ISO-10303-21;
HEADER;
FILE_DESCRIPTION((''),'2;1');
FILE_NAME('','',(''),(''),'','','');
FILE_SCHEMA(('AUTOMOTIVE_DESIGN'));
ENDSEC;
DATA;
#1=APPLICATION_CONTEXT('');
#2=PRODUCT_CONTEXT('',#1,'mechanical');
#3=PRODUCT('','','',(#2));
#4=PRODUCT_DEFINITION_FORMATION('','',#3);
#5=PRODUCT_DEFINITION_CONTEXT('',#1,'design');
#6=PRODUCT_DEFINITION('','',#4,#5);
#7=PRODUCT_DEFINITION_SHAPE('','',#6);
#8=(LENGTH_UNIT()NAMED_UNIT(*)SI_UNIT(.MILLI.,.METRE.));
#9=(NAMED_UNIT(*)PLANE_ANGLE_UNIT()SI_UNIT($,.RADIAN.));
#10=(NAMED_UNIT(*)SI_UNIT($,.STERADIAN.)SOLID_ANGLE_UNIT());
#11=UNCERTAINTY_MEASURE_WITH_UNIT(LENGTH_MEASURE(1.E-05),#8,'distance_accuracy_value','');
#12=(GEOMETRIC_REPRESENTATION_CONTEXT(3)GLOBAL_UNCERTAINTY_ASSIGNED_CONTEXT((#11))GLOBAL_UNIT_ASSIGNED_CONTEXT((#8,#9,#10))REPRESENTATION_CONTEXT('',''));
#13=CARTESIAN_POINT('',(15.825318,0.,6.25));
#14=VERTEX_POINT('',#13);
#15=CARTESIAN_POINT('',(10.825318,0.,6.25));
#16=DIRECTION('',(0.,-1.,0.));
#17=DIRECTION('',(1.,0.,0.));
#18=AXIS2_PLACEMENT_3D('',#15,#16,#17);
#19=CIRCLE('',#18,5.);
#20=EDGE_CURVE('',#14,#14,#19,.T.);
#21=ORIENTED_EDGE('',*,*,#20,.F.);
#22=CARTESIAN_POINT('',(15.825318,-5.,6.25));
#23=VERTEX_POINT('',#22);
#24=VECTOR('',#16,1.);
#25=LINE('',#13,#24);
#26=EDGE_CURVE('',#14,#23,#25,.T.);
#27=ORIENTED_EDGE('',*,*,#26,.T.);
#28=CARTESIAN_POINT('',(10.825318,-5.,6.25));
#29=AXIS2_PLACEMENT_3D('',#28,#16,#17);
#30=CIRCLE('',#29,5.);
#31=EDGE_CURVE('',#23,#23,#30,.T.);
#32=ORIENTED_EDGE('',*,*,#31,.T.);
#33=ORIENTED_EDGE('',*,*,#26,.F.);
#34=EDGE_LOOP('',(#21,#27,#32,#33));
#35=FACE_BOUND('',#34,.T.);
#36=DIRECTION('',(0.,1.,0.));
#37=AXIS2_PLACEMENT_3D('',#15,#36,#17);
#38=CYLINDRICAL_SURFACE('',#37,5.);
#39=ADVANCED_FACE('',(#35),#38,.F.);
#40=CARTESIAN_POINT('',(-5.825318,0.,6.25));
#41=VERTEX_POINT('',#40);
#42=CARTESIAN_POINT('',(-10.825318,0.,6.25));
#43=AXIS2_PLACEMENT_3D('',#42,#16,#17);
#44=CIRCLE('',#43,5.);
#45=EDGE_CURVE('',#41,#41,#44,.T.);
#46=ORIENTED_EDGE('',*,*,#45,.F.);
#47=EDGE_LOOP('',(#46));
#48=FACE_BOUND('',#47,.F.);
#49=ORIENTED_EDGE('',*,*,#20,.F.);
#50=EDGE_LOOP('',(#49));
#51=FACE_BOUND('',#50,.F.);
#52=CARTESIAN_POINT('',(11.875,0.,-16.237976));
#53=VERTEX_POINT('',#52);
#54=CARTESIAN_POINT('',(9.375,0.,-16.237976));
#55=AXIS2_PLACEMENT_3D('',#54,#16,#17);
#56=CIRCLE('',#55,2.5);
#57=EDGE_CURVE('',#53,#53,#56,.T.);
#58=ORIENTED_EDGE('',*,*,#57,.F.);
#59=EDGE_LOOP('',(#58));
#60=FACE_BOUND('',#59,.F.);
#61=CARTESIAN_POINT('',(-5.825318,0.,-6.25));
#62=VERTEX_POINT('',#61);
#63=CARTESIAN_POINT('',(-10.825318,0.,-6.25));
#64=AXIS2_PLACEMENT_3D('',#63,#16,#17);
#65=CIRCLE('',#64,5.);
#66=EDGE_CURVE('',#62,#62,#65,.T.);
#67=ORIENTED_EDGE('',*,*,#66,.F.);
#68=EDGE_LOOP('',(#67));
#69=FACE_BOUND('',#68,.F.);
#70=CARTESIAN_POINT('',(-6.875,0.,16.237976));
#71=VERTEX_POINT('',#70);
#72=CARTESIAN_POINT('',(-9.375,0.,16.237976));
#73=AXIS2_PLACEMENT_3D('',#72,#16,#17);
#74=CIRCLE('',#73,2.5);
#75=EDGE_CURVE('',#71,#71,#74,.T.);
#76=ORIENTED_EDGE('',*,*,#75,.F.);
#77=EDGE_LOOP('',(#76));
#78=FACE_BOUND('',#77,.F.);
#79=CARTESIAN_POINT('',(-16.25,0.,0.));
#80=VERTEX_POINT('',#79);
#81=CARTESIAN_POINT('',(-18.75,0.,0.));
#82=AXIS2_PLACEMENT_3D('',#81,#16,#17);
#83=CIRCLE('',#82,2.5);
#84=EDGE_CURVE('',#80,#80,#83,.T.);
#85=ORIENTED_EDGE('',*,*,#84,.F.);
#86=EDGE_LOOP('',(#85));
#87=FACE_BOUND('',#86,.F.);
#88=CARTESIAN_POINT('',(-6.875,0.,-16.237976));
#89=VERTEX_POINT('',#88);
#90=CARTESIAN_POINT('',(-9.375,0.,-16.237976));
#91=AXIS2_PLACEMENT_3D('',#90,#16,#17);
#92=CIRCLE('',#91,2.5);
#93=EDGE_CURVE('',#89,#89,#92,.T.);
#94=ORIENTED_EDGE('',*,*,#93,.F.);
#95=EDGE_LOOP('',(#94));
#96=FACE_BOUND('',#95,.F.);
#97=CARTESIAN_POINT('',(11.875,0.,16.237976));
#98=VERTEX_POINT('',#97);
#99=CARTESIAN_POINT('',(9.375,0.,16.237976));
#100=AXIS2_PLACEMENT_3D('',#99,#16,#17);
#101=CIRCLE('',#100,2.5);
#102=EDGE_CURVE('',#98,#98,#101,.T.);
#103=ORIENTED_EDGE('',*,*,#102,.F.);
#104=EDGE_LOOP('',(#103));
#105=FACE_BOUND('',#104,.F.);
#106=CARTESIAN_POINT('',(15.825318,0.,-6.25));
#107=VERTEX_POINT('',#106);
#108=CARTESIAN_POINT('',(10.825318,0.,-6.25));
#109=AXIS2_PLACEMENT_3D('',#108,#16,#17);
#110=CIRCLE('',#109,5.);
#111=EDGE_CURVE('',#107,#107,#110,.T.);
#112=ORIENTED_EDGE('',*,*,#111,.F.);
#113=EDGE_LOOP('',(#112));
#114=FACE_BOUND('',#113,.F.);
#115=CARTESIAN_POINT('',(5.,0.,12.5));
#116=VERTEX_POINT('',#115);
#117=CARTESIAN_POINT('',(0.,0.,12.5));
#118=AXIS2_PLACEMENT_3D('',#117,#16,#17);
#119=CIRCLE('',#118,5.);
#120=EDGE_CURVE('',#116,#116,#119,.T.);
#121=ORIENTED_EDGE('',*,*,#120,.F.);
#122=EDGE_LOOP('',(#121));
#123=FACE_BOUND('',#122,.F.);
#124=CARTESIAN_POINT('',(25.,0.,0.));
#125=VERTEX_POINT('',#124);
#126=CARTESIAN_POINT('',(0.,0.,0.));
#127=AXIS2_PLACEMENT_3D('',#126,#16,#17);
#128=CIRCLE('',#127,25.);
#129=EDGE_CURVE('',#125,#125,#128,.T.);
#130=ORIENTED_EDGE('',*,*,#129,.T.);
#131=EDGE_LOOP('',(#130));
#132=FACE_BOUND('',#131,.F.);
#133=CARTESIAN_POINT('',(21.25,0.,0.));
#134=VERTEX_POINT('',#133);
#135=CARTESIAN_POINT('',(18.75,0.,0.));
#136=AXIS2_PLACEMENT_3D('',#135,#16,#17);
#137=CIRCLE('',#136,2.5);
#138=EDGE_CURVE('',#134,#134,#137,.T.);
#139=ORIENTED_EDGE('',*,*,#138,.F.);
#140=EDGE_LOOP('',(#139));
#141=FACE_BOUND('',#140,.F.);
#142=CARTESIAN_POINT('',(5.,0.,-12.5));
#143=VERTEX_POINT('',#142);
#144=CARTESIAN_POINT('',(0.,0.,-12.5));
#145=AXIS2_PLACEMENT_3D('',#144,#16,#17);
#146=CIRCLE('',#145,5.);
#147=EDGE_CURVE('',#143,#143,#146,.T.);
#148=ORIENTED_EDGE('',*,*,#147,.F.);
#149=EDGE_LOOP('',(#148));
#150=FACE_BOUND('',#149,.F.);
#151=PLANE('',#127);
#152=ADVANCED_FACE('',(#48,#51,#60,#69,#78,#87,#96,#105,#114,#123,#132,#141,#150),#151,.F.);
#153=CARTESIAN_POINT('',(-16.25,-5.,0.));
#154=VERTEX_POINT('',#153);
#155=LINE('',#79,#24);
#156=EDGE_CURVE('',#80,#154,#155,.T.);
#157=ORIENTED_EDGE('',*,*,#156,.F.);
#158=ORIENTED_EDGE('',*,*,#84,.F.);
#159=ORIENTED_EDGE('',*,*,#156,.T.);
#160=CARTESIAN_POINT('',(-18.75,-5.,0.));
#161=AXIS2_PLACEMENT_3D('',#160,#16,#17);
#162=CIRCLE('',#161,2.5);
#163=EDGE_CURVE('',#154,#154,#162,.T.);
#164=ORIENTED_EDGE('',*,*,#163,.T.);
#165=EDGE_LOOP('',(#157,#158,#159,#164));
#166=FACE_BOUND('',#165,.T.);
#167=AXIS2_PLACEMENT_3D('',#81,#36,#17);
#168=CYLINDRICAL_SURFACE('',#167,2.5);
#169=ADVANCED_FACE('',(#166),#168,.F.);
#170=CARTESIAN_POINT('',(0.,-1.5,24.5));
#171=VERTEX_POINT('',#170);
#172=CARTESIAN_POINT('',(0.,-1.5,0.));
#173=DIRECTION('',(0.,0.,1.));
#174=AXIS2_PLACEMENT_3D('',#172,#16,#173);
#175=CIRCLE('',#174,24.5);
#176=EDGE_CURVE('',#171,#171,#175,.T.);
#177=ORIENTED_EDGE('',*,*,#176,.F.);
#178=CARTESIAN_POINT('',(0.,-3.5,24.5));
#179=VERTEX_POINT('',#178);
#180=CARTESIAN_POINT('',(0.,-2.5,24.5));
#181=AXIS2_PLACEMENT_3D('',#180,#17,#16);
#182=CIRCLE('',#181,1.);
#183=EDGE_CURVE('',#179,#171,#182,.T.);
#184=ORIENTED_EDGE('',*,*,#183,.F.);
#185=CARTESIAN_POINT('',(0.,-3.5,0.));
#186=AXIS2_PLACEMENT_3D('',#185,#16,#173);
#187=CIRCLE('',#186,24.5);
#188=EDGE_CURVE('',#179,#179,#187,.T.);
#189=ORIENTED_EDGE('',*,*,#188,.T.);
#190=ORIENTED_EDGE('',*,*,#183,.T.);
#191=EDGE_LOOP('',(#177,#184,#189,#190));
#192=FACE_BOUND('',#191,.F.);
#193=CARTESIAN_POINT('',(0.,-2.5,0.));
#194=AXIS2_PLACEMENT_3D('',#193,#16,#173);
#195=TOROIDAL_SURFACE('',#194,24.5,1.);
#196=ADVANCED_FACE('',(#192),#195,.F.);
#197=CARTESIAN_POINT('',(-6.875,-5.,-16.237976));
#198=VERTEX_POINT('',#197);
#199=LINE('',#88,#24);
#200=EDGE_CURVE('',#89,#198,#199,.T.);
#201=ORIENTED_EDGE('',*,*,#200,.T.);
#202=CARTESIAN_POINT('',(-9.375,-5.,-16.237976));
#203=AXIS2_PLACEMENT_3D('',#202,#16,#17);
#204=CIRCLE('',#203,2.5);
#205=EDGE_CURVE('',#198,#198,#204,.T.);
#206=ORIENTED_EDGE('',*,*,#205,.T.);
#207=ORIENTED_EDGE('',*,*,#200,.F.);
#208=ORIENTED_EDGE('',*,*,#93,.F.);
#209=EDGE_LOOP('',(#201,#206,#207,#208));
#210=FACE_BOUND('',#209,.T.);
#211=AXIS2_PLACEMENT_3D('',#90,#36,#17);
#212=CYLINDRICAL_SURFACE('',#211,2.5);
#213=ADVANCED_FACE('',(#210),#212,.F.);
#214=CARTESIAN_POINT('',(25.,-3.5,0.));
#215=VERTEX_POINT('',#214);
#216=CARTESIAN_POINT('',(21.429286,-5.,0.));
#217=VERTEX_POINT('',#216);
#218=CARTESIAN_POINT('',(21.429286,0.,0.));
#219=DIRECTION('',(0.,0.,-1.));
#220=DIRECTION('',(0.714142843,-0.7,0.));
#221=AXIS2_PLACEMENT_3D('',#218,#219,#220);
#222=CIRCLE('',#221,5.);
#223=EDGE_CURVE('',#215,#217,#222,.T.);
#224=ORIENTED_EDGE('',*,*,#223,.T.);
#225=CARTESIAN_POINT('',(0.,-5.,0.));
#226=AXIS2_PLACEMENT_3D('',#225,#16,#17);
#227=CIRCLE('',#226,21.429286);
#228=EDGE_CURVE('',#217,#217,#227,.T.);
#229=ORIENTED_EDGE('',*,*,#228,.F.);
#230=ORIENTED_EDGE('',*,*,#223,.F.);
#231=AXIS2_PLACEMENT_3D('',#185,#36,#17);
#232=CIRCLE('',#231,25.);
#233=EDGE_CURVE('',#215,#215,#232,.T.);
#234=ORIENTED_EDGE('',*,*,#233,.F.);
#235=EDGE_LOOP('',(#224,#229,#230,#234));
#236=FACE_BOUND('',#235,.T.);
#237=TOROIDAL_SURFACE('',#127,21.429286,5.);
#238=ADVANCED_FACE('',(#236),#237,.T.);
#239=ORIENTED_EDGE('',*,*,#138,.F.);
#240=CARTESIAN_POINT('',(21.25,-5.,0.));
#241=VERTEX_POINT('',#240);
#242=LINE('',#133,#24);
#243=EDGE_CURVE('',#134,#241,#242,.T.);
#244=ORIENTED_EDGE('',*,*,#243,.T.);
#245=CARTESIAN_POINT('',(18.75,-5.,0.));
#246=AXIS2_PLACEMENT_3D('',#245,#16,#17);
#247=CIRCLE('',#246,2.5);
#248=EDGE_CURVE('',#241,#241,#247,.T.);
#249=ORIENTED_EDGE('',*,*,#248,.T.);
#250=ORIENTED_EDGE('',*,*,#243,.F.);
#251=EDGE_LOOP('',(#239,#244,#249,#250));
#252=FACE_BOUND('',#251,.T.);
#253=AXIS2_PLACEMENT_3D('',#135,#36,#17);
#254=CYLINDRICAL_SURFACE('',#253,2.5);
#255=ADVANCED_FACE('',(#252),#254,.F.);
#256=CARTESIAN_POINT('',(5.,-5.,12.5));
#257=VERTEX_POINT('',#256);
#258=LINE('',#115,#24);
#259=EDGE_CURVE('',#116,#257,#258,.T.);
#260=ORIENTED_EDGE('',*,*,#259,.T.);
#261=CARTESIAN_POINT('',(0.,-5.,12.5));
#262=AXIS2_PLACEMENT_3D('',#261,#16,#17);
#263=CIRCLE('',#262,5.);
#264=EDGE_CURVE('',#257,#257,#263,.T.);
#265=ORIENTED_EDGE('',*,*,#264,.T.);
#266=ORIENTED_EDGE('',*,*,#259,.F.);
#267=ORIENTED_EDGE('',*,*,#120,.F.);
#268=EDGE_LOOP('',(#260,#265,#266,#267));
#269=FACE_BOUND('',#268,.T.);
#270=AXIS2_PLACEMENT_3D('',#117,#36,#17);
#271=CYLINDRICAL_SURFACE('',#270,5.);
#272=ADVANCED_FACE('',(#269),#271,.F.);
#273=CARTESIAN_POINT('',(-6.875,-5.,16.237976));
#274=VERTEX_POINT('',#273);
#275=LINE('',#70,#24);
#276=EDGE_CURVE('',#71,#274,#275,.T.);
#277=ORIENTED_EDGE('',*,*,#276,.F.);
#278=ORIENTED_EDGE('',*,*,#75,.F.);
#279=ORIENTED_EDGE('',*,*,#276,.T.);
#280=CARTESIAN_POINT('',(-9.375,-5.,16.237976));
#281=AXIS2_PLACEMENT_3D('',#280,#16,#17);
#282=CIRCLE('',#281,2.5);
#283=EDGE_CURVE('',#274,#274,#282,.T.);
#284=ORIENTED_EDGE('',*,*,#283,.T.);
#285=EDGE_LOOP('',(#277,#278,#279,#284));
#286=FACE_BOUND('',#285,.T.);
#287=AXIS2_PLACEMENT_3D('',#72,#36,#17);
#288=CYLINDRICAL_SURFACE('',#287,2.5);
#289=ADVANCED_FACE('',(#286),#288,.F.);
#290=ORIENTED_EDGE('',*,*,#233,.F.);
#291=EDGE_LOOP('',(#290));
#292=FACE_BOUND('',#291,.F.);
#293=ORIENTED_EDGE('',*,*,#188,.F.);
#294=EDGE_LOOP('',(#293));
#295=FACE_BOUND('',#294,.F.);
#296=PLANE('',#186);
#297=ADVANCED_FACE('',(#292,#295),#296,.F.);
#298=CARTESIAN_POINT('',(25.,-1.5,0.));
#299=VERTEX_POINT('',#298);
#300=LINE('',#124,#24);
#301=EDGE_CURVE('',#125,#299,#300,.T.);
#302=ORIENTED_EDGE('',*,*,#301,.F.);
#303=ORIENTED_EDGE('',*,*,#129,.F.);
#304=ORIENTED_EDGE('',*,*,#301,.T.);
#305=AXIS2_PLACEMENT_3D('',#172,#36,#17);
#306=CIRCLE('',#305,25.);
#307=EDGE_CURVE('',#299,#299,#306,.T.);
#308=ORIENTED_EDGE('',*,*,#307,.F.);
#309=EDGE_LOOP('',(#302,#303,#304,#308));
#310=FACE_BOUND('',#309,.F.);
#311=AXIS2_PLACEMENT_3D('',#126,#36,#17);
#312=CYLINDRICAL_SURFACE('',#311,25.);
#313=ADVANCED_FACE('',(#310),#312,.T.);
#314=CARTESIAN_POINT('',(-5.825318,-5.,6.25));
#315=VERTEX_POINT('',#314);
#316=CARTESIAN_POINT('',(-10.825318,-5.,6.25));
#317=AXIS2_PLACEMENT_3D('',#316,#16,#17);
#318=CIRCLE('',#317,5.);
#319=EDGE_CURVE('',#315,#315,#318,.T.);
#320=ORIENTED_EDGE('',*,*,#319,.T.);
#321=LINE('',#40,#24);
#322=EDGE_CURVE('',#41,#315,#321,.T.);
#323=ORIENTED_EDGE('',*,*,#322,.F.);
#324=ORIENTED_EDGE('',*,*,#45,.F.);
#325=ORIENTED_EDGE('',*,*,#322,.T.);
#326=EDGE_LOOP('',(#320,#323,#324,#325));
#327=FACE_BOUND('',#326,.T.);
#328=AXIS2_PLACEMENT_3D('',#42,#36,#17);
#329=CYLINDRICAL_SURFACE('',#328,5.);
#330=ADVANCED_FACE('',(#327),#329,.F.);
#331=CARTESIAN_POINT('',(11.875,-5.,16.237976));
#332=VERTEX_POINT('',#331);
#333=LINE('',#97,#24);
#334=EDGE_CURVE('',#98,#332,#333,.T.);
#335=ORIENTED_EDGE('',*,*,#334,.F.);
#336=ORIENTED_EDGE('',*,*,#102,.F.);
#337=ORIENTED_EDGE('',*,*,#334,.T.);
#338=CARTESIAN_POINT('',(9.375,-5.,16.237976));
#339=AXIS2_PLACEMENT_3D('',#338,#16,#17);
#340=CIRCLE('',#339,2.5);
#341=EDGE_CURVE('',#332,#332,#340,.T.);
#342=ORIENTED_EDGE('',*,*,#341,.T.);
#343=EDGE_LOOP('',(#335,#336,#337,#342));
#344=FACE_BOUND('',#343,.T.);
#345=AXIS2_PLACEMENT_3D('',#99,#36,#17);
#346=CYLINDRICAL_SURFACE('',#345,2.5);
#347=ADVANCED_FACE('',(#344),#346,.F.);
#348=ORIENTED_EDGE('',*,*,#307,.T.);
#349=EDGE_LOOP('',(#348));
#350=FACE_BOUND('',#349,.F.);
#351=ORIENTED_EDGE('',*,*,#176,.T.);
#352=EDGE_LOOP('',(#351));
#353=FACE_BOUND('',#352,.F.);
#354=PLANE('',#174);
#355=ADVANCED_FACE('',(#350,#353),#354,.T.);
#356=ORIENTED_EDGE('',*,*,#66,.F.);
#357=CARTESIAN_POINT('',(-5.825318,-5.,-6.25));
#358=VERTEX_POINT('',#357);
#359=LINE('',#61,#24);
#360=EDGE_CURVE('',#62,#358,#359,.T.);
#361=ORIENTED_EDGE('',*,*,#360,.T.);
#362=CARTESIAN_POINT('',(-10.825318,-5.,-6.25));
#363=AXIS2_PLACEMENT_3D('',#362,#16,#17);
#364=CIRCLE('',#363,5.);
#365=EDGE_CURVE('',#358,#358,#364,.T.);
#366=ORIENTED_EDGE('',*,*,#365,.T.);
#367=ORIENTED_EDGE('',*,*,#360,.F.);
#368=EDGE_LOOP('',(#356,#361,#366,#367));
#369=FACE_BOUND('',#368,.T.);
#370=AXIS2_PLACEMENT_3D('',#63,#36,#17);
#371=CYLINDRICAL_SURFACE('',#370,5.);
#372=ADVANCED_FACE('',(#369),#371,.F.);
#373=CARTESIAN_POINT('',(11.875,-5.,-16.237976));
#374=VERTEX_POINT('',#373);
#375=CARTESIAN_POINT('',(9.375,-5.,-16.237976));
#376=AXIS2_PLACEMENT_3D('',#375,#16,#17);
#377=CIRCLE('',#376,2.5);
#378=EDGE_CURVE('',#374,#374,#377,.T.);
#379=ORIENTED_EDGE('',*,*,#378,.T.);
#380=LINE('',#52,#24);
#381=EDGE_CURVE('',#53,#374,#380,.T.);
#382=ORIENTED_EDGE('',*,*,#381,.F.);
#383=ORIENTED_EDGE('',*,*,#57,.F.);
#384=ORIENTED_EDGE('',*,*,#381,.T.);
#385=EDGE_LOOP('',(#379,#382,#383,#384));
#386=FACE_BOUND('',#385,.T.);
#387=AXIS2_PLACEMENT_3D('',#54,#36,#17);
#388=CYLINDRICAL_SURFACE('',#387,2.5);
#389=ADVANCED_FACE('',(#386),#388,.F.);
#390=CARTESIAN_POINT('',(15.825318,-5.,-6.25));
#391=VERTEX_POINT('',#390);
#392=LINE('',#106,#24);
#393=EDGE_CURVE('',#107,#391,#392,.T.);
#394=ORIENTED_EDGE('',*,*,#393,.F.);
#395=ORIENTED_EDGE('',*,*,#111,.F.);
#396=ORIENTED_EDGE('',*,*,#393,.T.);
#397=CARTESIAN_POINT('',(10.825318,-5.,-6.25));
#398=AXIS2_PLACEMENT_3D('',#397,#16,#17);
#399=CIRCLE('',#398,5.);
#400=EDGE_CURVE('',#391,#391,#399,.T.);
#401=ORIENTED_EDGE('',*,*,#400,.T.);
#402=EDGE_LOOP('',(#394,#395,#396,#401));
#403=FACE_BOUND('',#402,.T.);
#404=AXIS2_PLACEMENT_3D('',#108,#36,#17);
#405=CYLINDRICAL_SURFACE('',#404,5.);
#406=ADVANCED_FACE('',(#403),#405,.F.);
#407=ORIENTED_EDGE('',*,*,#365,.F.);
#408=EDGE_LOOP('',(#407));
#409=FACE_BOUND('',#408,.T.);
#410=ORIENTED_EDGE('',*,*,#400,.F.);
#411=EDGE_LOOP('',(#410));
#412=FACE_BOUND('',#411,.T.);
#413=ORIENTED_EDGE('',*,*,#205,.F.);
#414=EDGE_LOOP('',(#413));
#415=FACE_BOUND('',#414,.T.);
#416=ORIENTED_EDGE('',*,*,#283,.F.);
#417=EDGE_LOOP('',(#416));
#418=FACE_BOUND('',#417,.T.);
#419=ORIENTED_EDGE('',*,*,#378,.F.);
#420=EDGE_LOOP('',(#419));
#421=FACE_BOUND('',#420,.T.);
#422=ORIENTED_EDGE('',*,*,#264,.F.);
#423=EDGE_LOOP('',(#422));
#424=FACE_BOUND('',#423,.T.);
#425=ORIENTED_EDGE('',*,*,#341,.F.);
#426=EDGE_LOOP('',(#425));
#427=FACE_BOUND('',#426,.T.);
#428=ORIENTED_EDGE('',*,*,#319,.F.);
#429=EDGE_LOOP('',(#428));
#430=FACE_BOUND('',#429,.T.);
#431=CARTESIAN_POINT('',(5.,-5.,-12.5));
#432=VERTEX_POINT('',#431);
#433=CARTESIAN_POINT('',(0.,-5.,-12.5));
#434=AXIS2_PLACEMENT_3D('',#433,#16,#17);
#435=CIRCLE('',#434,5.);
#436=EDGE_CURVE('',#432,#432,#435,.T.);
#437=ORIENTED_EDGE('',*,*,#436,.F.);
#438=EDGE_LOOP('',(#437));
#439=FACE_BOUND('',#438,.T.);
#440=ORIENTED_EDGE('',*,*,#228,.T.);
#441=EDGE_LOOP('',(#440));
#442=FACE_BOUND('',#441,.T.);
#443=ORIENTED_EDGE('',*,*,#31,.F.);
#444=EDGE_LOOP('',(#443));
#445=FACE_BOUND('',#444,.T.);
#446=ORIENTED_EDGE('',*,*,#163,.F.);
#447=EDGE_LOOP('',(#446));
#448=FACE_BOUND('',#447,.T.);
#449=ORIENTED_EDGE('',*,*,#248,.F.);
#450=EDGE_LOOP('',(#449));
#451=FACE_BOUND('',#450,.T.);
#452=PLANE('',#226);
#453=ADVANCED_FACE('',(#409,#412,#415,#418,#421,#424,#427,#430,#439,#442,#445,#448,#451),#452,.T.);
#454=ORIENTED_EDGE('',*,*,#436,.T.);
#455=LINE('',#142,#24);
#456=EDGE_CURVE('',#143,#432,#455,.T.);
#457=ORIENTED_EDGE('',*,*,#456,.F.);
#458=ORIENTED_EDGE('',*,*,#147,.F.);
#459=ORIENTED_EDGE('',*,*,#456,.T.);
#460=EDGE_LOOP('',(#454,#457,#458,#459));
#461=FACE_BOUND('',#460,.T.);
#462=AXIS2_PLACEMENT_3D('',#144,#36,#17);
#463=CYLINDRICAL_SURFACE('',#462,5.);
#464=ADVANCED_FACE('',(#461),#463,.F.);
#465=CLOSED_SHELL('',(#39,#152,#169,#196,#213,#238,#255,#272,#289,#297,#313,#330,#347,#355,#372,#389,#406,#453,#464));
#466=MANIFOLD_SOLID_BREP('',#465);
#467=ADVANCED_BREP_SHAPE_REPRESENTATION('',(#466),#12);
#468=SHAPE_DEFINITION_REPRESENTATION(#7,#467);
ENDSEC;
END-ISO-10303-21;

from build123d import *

# Parameters (mm, degrees)
F0_R     = 25
F0_R_2   = 2.5
F0_R_3   = 5
F1_DEPTH = 5


# Not quite as in the source:
# - a fillet or chamfer that OpenCascade refuses, or shapes differently, is made with other operations: its cross-section is extruded or revolved along the edge and cut away or added


with BuildPart() as f1:
    # F0 (on Front) → F1 (new body)
    with BuildSketch(Plane.XZ):
        Circle(F0_R)
        with Locations((-9.375, -16.237976321)):
            Circle(F0_R_2, mode=Mode.SUBTRACT)
        with Locations((-10.8253175473, -6.25)):
            Circle(F0_R_3, mode=Mode.SUBTRACT)
        with Locations((9.375, -16.237976321)):
            Circle(F0_R_2, mode=Mode.SUBTRACT)
        with Locations((0, -12.5)):
            Circle(F0_R_3, mode=Mode.SUBTRACT)
        with Locations((10.8253175473, -6.25)):
            Circle(F0_R_3, mode=Mode.SUBTRACT)
        with Locations((-18.75, 0)):
            Circle(F0_R_2, mode=Mode.SUBTRACT)
        with Locations((-10.8253175473, 6.25)):
            Circle(F0_R_3, mode=Mode.SUBTRACT)
        with Locations((-9.375, 16.237976321)):
            Circle(F0_R_2, mode=Mode.SUBTRACT)
        with Locations((10.8253175473, 6.25)):
            Circle(F0_R_3, mode=Mode.SUBTRACT)
        with Locations((18.75, 0)):
            Circle(F0_R_2, mode=Mode.SUBTRACT)
        with Locations((0, 12.5)):
            Circle(F0_R_3, mode=Mode.SUBTRACT)
        with Locations((9.375, 16.237976321)):
            Circle(F0_R_2, mode=Mode.SUBTRACT)
    extrude(amount=F1_DEPTH)

    # F3 (on Right) → F5 (revolve, cut)
    with BuildSketch(Plane.YZ):
        with BuildLine():
            Line((-3.5, 25), (-3.5, 24.5))
            ThreePointArc((-3.5, 24.5), (-3.4659258263, 24.7588190451), (-3.3660254038, 25))
            Line((-3.3660254038, 25), (-3.5, 25))
        make_face()
        with BuildLine():
            ThreePointArc((-3.3660254038, 25), (-3.4659258263, 24.7588190451), (-3.5, 24.5))
            ThreePointArc((-3.5, 24.5), (-2.5, 23.5), (-1.5, 24.5))
            ThreePointArc((-1.5, 24.5), (-1.5340741737, 24.7588190451), (-1.6339745962, 25))
            Line((-1.6339745962, 25), (-3.3660254038, 25))
        make_face()
        with BuildLine():
            ThreePointArc((-1.6339745962, 25), (-2.5, 25.5), (-3.3660254038, 25))
            Line((-3.3660254038, 25), (-1.6339745962, 25))
        make_face()
        with BuildLine():
            ThreePointArc((-1.6339745962, 25), (-1.5340741737, 24.7588190451), (-1.5, 24.5))
            Line((-1.5, 24.5), (-1.5, 25))
            Line((-1.5, 25), (-1.6339745962, 25))
        make_face()
    revolve(axis=Axis((0, -2.5, 0), (0, -1, 0)), mode=Mode.SUBTRACT)

    # F6: fillet of radius 5 on 1 edges, made by hand

    # F6_s1 → F6_t2 (revolve, cut)
    with BuildSketch(Plane.XY):
        with BuildLine():
            ThreePointArc((25, -3.5), (23.3657774588, -4.6097722286), (21.4292857857, -5))
            Line((21.4292857857, -5), (25, -5))
            Line((25, -5), (25, -3.5))
        make_face()
    revolve(axis=Axis((0, -5, 0), (0, -1, 0)), mode=Mode.SUBTRACT)


solid = f1.part
